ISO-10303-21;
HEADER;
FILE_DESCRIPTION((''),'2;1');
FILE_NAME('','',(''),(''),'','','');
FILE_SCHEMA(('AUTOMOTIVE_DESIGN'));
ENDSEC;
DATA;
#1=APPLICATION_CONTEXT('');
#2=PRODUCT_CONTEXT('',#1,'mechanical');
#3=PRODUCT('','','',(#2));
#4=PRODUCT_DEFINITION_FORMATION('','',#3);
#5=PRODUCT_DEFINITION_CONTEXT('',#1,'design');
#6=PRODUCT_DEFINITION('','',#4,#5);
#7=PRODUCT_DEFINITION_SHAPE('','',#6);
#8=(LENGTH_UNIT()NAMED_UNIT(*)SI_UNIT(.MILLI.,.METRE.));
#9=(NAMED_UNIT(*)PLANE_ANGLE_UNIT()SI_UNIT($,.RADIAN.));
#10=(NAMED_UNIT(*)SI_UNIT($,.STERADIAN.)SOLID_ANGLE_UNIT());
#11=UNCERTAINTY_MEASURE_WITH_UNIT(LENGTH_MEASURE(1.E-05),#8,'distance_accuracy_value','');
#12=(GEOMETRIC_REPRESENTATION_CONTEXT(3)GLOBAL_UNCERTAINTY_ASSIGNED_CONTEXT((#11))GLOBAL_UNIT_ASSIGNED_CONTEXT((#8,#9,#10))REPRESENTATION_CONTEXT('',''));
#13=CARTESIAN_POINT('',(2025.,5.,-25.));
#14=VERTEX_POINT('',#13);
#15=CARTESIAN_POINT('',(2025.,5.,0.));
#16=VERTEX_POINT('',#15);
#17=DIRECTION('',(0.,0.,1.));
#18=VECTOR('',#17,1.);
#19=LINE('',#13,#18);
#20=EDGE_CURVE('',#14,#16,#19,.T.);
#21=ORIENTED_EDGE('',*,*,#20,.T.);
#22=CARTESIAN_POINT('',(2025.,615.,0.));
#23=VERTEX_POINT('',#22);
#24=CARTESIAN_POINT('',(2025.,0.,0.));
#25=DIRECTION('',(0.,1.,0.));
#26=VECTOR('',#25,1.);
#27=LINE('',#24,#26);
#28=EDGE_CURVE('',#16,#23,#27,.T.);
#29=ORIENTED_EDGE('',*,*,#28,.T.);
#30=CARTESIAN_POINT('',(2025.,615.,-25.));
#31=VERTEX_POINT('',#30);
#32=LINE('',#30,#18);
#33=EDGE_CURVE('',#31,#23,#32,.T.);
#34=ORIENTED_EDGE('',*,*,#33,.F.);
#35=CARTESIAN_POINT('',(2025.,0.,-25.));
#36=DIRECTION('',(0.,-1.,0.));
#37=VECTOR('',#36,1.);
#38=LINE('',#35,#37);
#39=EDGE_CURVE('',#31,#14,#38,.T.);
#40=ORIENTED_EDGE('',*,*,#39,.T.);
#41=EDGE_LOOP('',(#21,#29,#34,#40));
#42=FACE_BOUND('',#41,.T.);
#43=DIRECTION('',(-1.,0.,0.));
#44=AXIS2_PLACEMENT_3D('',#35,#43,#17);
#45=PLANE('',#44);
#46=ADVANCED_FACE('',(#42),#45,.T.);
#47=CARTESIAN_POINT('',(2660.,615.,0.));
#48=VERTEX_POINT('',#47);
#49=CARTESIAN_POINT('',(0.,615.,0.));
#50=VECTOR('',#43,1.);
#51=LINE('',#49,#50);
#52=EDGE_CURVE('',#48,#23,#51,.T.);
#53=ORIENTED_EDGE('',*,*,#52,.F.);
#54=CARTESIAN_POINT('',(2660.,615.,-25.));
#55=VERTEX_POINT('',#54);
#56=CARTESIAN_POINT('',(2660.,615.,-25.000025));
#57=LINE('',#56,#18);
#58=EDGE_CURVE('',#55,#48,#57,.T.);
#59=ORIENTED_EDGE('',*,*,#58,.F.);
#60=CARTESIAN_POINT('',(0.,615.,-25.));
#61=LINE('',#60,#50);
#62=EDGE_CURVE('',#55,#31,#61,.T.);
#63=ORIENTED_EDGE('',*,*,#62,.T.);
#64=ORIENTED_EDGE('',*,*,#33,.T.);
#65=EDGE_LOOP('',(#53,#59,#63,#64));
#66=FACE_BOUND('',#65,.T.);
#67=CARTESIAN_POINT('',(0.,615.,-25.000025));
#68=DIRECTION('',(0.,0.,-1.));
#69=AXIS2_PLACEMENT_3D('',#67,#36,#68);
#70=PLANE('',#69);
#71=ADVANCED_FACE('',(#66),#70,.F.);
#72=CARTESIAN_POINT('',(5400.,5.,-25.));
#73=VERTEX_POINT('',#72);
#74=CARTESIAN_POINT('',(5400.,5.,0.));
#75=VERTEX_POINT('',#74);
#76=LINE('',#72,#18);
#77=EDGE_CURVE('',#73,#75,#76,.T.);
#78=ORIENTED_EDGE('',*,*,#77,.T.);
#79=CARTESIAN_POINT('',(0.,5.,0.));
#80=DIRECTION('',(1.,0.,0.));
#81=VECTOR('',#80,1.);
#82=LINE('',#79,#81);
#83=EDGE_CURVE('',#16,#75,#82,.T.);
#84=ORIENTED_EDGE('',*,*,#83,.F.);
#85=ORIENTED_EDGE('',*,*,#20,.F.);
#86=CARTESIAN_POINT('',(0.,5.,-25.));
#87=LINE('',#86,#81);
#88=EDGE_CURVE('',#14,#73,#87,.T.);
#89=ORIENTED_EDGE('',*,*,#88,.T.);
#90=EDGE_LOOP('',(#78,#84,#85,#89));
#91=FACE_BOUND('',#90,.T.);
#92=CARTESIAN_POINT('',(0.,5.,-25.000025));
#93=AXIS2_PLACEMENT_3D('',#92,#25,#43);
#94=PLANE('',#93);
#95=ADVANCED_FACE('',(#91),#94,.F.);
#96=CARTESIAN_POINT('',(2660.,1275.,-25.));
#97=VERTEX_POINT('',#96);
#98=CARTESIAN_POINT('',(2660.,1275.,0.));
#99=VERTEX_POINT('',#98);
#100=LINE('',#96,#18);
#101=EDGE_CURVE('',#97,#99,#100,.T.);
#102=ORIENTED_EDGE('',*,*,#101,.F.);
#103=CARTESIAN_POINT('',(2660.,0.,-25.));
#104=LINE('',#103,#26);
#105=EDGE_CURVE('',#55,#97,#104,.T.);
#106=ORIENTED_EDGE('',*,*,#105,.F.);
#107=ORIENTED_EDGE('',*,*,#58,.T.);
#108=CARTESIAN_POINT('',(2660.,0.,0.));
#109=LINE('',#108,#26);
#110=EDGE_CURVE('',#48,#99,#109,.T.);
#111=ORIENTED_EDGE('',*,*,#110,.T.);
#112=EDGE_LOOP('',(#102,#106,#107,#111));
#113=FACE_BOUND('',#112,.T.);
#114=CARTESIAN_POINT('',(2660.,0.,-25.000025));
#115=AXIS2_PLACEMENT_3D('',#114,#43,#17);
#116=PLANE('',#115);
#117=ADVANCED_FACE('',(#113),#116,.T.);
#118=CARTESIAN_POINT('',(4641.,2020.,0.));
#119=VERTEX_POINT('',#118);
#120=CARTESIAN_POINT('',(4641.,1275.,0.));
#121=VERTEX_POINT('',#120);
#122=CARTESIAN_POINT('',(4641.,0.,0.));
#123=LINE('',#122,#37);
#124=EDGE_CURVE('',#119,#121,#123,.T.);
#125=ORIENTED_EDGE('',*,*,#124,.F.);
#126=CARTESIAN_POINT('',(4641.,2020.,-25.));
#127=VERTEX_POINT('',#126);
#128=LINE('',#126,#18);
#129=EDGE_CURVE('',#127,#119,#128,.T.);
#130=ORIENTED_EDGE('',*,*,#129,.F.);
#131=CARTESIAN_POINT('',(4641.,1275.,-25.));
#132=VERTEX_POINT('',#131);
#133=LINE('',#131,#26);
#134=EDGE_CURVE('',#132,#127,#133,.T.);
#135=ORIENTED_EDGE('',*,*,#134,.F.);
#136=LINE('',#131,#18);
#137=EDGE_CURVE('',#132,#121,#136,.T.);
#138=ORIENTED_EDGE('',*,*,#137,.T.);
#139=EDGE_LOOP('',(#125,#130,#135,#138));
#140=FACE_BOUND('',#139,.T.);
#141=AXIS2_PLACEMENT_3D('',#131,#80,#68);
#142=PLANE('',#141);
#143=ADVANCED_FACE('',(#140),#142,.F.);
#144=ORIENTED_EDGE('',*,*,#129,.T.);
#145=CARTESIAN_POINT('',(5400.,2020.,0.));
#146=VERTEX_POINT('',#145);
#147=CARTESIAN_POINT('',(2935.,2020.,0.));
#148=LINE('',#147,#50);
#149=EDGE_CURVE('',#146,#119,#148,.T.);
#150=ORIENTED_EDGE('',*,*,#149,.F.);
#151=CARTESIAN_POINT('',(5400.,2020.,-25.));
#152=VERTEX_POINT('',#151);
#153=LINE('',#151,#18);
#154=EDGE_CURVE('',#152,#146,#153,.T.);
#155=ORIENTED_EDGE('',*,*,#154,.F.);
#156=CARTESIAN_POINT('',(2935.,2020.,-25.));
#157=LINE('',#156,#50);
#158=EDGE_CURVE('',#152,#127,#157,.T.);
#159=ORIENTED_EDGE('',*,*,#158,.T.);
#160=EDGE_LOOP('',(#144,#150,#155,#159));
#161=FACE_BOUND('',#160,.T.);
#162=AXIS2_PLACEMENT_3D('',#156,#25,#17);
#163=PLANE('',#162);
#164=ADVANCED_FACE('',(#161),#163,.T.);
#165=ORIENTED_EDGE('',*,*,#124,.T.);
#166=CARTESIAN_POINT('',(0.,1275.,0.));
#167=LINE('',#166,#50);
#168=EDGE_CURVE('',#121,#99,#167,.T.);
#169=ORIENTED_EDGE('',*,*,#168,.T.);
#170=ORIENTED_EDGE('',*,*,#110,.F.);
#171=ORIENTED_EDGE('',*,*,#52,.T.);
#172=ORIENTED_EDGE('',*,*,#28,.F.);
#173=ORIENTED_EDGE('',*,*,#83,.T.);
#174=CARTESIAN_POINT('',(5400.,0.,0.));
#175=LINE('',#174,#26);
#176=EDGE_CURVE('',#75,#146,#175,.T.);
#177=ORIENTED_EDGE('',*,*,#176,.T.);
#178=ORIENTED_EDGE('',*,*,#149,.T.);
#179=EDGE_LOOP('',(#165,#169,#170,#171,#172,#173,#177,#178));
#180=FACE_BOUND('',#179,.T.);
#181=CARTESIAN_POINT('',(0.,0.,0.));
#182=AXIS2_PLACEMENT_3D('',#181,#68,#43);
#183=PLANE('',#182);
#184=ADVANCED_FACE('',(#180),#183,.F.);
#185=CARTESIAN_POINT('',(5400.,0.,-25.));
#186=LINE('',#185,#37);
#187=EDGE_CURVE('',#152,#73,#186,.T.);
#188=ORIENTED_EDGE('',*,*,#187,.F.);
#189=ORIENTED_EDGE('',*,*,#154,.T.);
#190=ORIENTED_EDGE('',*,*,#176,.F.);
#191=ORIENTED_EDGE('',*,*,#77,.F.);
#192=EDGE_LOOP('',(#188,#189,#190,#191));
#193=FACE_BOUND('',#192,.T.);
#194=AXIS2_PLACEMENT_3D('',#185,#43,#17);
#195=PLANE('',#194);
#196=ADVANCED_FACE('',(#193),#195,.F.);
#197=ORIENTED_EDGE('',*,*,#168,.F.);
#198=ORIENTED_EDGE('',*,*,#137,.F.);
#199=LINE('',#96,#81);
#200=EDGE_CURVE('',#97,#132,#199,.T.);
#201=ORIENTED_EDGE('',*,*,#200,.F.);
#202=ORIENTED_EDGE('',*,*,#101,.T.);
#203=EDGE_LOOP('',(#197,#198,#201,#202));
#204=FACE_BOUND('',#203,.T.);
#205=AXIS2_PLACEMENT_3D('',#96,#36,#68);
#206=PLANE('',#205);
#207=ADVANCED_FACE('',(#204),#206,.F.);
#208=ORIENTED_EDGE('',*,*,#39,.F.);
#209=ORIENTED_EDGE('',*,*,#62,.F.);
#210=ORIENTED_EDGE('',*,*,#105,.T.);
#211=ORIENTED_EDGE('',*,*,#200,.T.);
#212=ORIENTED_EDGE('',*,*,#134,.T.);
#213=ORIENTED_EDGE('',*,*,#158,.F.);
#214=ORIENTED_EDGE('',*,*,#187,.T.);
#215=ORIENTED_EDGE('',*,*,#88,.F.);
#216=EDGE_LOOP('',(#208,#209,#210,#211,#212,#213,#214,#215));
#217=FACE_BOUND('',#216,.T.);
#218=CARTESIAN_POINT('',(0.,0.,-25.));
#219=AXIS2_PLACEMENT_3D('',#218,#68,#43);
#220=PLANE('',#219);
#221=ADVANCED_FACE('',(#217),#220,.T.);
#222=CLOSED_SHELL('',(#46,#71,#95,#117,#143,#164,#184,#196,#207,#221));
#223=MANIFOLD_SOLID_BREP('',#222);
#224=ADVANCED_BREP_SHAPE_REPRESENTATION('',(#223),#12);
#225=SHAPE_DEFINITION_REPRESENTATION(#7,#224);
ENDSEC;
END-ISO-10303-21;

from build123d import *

# Parameters (mm, degrees)
TABAN_FLAN_1_DEPTH         = 25
KES_EKSTR_ZYON1_DEPTH      = 6508.676543898
KES_EKSTR_ZYON1_DEPTH_BACK = 6508.676543898
IZIM7_W                    = 1400
IZIM7_H                    = 1895
IZIM7_W_2                  = 310
IZIM7_H_2                  = 495
KES_EKSTR_ZYON2_DEPTH      = 6508.676543898
KES_EKSTR_ZYON2_DEPTH_BACK = 6508.676543898
IZIM8_W                    = 292
IZIM8_H                    = 2515
KES_EKSTR_ZYON3_DEPTH      = 6240.38698912
KES_EKSTR_ZYON3_DEPTH_BACK = 6240.38698912
IZIM10_W                   = 2900
IZIM10_H                   = 350
KES_EKSTR_ZYON4_DEPTH      = 6240.38698912
KES_EKSTR_ZYON4_DEPTH_BACK = 6240.38698912
KES_EKSTR_ZYON5_DEPTH      = 6191.05856192
KES_EKSTR_ZYON5_DEPTH_BACK = 6191.05856192
IZIM12_W                   = 5
IZIM12_H                   = 615
KES_EKSTR_ZYON6_DEPTH      = 6191.05856192
KES_EKSTR_ZYON6_DEPTH_BACK = 6191.05856192
IZIM13_W                   = 55
IZIM13_H                   = 2385
KES_EKSTR_ZYON7_DEPTH      = 6140.360715905
KES_EKSTR_ZYON7_DEPTH_BACK = 6140.360715905
KES_EKSTR_ZYON8_DEPTH      = 6140.360715905
KES_EKSTR_ZYON8_DEPTH_BACK = 6140.360715905
IZIM16_W                   = 190
IZIM16_H                   = 370
IZIM16_W_2                 = 620
IZIM16_H_2                 = 610


# Sheet-metal steps are written as plain solids
with BuildPart() as part:
    # Çizim1 → Taban-Flanş1 (new body)
    with BuildSketch(Plane.XY):
        Polygon((0, 0), (0, 1895), (2935, 1895), (2935, 2020), (4900, 2020), (4900, 2515), (6002, 2515), (6002, 0), align=None)
    extrude(amount=-TABAN_FLAN_1_DEPTH)

    # Çizim7 → Kes-Ekstrüzyon1 (cut, two sides: drawn at the far end of the back side and taken through both)
    with BuildSketch(Plane.XY.offset(-KES_EKSTR_ZYON1_DEPTH_BACK)):
        with Locations((700, 947.5)):
            Rectangle(IZIM7_W, IZIM7_H)
        with Locations((5055, 2267.5)):
            Rectangle(IZIM7_W_2, IZIM7_H_2)
    extrude(amount=KES_EKSTR_ZYON1_DEPTH + KES_EKSTR_ZYON1_DEPTH_BACK, mode=Mode.SUBTRACT)

    # Çizim8 → Kes-Ekstrüzyon2 (cut, two sides: drawn at the far end of the back side and taken through both)
    with BuildSketch(Plane.XY.offset(-KES_EKSTR_ZYON2_DEPTH_BACK)):
        with Locations((5856, 1257.5)):
            Rectangle(IZIM8_W, IZIM8_H)
    extrude(amount=KES_EKSTR_ZYON2_DEPTH + KES_EKSTR_ZYON2_DEPTH_BACK, mode=Mode.SUBTRACT)

    # Çizim10 → Kes-Ekstrüzyon3 (cut, two sides: drawn at the far end of the back side and taken through both)
    with BuildSketch(Plane.XY.offset(-KES_EKSTR_ZYON3_DEPTH_BACK)):
        with Locations((2850, 1845)):
            Rectangle(IZIM10_W, IZIM10_H)
    extrude(amount=KES_EKSTR_ZYON3_DEPTH + KES_EKSTR_ZYON3_DEPTH_BACK, mode=Mode.SUBTRACT)

    # Çizim11 → Kes-Ekstrüzyon4 (cut, two sides: drawn at the far end of the back side and taken through both)
    with BuildSketch(Plane.XY.offset(-KES_EKSTR_ZYON4_DEPTH_BACK)):
        Polygon((4300, 1670), (4530, 1670), (4530, 2020), (5210, 2020), (5210, 2390), (5710, 2390), (5778.630385148, 2406.496682207), (5749.815338653, 2697.266696836), (5189.231706845, 2697.266696836), (4530, 2199.552257381), (4300, 2199.552257381), align=None)
    extrude(amount=KES_EKSTR_ZYON4_DEPTH + KES_EKSTR_ZYON4_DEPTH_BACK, mode=Mode.SUBTRACT)

    # Çizim12 → Kes-Ekstrüzyon5 (cut, two sides: drawn at the far end of the back side and taken through both)
    with BuildSketch(Plane.XY.offset(-KES_EKSTR_ZYON5_DEPTH_BACK)):
        Polygon((2660, 1670), (1400, 1670), (1400, 615), (1405, 615), (2660, 615), align=None)
        with Locations((1402.5, 307.5)):
            Rectangle(IZIM12_W, IZIM12_H)
    extrude(amount=KES_EKSTR_ZYON5_DEPTH + KES_EKSTR_ZYON5_DEPTH_BACK, mode=Mode.SUBTRACT)

    # Çizim13 → Kes-Ekstrüzyon6 (cut, two sides: drawn at the far end of the back side and taken through both)
    with BuildSketch(Plane.XY.offset(-KES_EKSTR_ZYON6_DEPTH_BACK)):
        with Locations((5682.5, 1197.5)):
            Rectangle(IZIM13_W, IZIM13_H)
        Polygon((1405, 0), (5710, 0), (5710, 5), (5655, 5), (1405, 5), align=None)
    extrude(amount=KES_EKSTR_ZYON6_DEPTH + KES_EKSTR_ZYON6_DEPTH_BACK, mode=Mode.SUBTRACT)

    # Çizim15 → Kes-Ekstrüzyon7 (cut, two sides: drawn at the far end of the back side and taken through both)
    with BuildSketch(Plane.XY.offset(-KES_EKSTR_ZYON7_DEPTH_BACK)):
        Polygon((2660, 1275), (4641, 1275), (4641, 2020), (5020.0077847, 2245.071458559), (4183.340521497, 2599.685397929), (2166.473741327, 1968.029318425), align=None)
    extrude(amount=KES_EKSTR_ZYON7_DEPTH + KES_EKSTR_ZYON7_DEPTH_BACK, mode=Mode.SUBTRACT)

    # Çizim16 → Kes-Ekstrüzyon8 (cut, two sides: drawn at the far end of the back side and taken through both)
    with BuildSketch(Plane.XY.offset(-KES_EKSTR_ZYON8_DEPTH_BACK)):
        Polygon((5655, 5), (5655, 2390), (5400, 2390), (5400, 2020), (5400, 5), align=None)
        with Locations((5305, 2205)):
            Rectangle(IZIM16_W, IZIM16_H)
        with Locations((1715, 310)):
            Rectangle(IZIM16_W_2, IZIM16_H_2)
    extrude(amount=KES_EKSTR_ZYON8_DEPTH + KES_EKSTR_ZYON8_DEPTH_BACK, mode=Mode.SUBTRACT)


solid = part.part
